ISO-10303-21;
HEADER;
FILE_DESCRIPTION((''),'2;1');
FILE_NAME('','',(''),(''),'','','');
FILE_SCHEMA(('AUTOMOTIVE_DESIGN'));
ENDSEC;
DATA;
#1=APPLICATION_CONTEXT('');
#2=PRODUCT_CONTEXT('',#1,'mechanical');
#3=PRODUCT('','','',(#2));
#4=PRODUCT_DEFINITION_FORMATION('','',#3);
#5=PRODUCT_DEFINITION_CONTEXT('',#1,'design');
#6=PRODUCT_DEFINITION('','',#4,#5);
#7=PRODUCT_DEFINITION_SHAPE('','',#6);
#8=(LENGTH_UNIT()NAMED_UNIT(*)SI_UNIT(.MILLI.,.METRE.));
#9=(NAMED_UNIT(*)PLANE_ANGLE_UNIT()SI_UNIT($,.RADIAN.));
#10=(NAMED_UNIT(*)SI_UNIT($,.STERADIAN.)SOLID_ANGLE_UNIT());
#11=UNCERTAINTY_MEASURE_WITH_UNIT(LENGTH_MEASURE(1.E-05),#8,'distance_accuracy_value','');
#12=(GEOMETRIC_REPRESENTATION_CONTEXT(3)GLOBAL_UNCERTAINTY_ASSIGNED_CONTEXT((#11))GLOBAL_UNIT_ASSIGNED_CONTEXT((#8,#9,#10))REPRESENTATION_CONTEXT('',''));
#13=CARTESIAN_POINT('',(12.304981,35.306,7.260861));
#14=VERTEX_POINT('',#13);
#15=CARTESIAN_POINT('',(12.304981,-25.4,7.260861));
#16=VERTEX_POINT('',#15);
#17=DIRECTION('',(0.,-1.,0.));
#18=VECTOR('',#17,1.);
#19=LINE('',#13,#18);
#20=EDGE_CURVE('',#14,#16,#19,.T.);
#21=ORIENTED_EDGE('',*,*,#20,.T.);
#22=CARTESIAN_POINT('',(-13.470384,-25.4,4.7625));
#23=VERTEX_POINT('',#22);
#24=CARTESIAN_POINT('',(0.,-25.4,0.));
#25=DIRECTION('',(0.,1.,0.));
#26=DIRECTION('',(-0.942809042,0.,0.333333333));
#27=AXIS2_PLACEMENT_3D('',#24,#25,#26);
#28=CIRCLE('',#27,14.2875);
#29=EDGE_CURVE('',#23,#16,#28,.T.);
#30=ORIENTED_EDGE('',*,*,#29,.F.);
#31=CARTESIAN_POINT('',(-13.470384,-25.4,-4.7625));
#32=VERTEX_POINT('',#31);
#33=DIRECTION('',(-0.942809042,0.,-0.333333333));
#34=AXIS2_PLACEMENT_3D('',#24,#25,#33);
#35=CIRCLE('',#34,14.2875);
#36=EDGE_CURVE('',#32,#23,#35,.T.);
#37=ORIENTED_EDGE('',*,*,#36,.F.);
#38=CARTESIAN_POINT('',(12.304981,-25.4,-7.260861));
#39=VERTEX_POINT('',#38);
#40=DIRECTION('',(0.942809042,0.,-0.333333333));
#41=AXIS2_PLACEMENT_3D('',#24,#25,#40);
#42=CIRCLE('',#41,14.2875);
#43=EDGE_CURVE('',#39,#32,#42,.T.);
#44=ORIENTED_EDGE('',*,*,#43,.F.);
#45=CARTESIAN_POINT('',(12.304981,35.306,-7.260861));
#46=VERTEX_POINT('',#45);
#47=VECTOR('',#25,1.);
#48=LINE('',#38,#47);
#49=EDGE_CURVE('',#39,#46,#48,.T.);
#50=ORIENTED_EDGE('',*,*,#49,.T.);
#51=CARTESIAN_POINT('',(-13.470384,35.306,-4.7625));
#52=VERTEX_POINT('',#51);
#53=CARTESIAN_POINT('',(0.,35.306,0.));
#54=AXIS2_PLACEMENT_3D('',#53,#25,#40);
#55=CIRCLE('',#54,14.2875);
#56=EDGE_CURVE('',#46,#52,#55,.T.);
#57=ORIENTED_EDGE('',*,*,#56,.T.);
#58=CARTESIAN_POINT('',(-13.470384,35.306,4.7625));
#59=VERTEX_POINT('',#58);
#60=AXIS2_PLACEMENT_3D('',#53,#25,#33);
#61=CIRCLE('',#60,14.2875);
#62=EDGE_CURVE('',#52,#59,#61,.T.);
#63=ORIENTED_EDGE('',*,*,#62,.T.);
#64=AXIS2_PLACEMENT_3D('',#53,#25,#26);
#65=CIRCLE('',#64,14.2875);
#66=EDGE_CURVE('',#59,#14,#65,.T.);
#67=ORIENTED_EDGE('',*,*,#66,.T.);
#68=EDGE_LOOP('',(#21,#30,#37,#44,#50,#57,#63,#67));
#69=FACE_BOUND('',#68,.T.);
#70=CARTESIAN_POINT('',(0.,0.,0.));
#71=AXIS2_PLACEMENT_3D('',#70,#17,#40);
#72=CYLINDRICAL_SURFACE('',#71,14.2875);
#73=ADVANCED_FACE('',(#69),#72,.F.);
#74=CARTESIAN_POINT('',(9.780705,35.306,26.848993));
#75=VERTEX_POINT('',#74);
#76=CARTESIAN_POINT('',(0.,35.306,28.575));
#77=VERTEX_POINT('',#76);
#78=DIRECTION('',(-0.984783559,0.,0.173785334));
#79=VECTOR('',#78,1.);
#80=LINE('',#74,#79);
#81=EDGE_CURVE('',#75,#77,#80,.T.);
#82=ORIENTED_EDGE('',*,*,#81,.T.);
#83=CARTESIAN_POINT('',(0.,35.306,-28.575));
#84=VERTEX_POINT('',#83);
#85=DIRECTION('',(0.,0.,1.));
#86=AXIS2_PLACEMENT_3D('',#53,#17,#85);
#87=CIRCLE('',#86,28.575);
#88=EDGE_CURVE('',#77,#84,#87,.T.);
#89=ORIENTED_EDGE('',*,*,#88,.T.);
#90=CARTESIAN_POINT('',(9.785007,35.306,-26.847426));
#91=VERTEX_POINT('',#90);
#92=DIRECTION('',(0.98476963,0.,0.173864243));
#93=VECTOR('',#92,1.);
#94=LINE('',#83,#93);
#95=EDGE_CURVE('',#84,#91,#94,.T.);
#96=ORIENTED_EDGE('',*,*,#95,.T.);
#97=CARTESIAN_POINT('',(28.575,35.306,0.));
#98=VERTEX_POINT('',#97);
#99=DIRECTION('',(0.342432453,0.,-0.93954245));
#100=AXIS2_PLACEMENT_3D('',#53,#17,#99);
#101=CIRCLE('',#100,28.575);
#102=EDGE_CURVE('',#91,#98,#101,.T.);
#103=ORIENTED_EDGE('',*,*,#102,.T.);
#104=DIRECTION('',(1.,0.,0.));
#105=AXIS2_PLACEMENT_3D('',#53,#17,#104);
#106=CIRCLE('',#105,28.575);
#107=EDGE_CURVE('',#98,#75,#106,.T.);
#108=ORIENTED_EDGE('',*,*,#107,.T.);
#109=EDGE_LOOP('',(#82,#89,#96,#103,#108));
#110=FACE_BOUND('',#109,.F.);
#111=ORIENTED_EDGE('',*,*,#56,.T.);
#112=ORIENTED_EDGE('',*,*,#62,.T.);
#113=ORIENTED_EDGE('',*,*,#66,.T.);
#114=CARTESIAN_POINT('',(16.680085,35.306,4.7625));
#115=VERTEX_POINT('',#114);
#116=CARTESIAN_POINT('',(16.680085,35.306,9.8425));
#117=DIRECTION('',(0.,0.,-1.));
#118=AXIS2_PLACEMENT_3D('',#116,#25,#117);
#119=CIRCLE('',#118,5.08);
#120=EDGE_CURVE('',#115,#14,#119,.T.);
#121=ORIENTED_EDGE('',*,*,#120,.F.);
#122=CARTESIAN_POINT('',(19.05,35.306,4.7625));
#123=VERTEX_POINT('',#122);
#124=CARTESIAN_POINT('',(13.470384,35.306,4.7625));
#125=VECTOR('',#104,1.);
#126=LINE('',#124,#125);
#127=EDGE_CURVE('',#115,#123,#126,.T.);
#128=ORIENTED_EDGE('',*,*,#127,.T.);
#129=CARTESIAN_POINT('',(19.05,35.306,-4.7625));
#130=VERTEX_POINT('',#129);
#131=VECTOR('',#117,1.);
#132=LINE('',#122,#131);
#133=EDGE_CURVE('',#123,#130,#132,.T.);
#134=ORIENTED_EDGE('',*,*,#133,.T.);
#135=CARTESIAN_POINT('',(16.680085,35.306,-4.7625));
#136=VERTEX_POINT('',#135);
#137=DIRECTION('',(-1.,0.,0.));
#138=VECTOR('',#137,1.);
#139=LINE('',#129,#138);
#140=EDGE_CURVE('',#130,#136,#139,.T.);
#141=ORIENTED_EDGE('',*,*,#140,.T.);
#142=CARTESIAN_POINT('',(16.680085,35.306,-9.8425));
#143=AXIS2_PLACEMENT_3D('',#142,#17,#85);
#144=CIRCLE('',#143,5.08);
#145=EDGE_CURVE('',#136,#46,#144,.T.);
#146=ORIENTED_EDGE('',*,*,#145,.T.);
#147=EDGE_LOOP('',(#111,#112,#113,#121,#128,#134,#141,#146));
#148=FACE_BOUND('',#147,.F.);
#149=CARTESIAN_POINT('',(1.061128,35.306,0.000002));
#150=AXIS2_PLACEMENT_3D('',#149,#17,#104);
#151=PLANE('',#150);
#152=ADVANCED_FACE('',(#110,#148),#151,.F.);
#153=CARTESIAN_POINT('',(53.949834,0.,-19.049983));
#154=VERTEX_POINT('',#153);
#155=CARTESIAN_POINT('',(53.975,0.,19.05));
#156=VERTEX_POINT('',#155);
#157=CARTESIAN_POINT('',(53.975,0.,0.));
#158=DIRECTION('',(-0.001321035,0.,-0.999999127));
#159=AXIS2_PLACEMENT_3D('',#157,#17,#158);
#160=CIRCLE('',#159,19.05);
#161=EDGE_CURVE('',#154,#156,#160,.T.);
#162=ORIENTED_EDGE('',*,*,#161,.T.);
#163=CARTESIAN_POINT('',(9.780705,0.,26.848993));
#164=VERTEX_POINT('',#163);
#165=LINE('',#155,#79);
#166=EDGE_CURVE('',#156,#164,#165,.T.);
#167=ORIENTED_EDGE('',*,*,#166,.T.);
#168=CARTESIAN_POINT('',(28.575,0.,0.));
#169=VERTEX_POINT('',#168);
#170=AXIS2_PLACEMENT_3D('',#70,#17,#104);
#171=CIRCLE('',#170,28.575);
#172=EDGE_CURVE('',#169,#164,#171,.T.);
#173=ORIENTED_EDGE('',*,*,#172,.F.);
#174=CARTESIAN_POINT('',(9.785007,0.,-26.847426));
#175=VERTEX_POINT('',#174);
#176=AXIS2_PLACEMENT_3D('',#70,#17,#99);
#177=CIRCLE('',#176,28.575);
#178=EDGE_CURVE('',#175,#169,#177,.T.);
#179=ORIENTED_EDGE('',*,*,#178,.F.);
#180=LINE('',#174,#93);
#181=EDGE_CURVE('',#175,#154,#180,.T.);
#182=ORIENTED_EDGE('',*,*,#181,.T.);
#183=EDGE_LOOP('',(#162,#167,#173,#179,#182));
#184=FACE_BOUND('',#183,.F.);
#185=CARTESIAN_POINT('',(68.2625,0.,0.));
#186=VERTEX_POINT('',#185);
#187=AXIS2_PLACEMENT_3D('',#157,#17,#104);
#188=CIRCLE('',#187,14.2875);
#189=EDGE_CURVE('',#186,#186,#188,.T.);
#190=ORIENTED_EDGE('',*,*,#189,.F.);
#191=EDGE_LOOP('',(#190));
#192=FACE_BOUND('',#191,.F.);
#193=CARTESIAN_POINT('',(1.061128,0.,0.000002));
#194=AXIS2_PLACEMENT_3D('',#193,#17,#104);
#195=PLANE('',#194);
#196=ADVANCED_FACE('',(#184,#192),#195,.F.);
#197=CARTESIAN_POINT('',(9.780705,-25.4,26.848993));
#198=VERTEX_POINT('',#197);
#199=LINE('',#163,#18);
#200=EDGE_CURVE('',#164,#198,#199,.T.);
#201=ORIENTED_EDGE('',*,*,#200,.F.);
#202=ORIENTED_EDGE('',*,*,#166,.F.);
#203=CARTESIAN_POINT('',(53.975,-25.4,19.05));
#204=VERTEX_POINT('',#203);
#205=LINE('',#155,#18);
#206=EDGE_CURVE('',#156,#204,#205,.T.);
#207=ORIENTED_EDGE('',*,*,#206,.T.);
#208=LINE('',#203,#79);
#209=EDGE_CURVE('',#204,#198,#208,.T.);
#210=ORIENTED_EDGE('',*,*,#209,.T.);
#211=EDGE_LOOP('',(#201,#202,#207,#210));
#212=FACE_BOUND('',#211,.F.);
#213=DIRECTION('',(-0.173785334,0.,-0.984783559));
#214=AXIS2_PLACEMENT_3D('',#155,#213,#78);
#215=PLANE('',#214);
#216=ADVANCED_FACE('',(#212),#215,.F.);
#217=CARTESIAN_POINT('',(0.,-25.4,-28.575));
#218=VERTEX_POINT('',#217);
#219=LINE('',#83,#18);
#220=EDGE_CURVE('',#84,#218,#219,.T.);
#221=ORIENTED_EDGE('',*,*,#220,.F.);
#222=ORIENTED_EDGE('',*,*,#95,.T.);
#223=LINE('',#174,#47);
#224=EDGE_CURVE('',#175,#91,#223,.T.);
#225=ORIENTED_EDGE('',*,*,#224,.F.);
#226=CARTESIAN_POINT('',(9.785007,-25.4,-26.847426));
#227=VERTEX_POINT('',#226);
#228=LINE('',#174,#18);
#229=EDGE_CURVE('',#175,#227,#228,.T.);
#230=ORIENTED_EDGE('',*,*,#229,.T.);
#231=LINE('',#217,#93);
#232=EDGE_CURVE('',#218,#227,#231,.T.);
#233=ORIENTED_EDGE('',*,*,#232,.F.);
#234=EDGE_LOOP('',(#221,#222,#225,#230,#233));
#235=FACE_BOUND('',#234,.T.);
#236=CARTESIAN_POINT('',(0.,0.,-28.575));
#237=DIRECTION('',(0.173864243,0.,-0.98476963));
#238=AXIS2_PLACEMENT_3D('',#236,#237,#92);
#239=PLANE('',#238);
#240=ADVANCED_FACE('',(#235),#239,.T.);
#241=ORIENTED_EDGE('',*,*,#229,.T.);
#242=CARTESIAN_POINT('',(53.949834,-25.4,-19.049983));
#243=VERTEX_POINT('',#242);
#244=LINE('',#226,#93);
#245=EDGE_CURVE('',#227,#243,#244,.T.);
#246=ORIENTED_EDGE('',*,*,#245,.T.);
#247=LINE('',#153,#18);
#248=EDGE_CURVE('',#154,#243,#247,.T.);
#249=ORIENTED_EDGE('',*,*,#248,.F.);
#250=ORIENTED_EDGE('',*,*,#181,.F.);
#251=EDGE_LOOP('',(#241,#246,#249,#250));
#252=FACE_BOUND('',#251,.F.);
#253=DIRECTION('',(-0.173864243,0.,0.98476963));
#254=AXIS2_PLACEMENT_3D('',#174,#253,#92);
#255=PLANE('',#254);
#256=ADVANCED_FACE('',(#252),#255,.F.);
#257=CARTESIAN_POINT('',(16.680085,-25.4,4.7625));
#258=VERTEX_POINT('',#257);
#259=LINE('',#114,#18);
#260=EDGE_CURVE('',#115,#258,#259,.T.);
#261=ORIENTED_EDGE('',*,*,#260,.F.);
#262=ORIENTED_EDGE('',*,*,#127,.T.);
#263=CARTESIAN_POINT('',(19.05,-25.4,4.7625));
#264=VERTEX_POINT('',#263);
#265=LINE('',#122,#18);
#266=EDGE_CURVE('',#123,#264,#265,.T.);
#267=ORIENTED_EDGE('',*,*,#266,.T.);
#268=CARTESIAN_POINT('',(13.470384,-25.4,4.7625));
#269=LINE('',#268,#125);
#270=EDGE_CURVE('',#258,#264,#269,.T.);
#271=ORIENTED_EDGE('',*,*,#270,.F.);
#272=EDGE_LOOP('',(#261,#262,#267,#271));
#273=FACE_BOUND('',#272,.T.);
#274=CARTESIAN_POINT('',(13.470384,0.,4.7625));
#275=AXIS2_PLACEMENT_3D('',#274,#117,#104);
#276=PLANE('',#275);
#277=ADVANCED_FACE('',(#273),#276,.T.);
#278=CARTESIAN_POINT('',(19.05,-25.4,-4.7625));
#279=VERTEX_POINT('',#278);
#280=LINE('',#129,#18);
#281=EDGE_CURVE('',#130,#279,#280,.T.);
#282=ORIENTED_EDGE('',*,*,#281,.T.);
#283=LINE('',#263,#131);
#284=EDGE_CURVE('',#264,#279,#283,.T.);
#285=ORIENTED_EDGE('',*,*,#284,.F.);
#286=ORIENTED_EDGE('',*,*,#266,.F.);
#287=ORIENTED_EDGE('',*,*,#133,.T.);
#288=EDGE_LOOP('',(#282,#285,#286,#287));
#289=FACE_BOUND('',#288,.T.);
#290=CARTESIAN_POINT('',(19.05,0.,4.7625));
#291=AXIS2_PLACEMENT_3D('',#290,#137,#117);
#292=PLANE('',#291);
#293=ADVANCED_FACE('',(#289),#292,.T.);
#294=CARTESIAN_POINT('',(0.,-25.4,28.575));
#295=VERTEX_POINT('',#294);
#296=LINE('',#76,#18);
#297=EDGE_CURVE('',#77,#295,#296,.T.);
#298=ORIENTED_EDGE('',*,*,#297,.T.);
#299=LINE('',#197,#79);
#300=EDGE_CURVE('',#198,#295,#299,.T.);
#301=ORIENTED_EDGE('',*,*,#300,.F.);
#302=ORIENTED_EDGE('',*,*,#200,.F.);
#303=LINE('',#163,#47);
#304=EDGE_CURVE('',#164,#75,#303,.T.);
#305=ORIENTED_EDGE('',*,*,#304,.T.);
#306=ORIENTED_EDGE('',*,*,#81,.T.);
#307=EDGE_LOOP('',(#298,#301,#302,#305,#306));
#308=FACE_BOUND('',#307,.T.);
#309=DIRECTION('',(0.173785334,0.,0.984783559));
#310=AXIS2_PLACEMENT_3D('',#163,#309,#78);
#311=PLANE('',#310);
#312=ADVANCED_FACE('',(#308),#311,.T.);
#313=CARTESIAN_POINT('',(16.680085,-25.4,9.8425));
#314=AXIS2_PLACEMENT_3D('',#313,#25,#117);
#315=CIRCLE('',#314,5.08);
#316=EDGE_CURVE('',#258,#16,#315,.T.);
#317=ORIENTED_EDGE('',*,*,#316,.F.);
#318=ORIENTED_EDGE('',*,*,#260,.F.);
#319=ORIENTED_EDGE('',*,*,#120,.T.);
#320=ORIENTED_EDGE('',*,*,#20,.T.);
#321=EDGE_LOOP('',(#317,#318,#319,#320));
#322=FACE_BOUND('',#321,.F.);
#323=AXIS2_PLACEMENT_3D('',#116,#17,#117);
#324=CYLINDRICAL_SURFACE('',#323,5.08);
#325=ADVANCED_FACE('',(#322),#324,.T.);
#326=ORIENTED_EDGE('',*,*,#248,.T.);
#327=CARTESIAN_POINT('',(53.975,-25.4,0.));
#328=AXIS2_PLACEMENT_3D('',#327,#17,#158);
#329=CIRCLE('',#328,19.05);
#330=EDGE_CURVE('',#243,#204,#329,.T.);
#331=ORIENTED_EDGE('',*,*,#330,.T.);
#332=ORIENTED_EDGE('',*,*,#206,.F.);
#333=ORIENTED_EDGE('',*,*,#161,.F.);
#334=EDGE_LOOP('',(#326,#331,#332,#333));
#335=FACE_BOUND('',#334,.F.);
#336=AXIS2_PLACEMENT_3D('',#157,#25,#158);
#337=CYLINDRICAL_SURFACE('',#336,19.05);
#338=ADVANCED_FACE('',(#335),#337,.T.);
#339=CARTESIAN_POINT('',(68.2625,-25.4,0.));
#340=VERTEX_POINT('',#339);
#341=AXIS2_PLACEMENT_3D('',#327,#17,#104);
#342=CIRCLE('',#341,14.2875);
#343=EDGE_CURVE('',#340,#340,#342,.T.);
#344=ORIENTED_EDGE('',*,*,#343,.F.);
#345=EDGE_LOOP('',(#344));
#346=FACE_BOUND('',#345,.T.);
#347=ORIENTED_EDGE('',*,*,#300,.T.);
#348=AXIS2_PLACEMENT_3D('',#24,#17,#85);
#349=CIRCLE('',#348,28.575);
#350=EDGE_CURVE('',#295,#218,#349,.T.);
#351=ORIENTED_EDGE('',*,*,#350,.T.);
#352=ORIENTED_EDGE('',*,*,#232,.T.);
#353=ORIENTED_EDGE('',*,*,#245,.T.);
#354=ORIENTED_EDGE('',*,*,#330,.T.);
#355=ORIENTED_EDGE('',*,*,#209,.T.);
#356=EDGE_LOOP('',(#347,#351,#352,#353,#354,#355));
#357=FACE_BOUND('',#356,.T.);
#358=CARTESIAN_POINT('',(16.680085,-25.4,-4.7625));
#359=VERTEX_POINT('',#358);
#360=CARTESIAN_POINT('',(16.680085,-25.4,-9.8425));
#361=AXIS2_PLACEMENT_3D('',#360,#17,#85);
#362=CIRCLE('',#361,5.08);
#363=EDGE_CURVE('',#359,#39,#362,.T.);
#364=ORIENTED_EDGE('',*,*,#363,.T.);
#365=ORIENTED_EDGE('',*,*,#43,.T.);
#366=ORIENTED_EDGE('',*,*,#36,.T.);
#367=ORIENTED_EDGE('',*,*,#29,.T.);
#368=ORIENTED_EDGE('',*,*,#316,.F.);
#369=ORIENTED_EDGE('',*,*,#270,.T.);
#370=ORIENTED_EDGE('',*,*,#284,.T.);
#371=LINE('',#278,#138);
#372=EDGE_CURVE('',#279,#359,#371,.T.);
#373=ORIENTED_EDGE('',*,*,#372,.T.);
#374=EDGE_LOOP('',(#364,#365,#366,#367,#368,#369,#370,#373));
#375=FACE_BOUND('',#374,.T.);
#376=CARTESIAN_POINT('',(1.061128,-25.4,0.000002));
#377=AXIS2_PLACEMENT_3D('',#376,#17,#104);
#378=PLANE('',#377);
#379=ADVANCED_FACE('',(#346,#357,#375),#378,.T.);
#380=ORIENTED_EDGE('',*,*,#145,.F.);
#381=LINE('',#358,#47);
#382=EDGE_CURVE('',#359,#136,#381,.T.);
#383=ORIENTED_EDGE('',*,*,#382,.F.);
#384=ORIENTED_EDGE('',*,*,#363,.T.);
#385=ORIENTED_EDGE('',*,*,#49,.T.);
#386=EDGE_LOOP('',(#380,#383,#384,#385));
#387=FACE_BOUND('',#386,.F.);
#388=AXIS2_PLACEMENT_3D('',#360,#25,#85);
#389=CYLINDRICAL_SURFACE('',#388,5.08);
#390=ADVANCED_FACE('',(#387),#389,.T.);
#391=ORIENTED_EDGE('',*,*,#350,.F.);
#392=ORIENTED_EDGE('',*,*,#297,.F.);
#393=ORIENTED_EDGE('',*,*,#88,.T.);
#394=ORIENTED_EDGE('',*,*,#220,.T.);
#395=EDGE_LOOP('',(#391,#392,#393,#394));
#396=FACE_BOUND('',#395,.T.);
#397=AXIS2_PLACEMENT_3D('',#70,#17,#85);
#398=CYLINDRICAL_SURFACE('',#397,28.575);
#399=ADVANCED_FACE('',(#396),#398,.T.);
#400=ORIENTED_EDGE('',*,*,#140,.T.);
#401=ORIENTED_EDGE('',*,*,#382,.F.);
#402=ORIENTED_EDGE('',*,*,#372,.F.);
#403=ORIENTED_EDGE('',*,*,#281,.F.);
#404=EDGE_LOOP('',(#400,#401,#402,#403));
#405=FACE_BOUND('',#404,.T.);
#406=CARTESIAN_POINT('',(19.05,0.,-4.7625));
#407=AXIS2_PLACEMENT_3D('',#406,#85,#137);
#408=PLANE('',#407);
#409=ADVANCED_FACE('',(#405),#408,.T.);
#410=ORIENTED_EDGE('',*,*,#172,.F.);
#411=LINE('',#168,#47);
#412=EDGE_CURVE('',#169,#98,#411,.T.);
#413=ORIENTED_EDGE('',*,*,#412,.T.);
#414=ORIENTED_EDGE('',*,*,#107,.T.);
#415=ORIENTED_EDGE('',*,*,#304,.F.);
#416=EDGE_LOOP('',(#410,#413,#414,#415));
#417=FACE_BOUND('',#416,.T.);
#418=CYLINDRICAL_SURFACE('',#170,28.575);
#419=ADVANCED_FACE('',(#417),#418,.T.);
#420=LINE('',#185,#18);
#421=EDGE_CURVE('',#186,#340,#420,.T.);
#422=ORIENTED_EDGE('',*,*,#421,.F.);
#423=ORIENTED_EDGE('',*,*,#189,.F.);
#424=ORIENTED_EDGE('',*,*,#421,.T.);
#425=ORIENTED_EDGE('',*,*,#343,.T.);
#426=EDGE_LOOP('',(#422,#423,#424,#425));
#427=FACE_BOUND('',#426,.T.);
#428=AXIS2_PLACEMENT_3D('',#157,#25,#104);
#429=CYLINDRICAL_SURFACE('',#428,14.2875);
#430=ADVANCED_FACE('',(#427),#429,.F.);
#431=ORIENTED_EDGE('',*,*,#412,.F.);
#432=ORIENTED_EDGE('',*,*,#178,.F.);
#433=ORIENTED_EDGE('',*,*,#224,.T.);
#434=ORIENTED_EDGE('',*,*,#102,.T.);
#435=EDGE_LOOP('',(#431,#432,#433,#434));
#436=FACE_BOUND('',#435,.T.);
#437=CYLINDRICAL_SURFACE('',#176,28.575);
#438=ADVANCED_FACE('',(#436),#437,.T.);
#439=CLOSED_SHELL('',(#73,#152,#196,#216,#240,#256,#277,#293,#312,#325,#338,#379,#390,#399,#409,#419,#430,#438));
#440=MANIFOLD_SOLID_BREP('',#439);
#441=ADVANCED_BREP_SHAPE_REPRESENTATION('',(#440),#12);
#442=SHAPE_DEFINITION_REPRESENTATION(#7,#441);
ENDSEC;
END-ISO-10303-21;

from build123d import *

# Parameters (mm, degrees)
F0_R     = 14.2875
F1_DEPTH = 25.4
F2_DEPTH = 35.306
F3_R     = 5.08


with BuildPart() as f1:
    # F0 (on Front) → F1 (new body)
    with BuildSketch(Plane.XZ):
        with BuildLine():
            Line((9.780704698, 26.8489932886), (0, 28.575))
            ThreePointArc((0, 28.575), (-28.575, 0), (0, -28.575))
            Line((0, -28.575), (9.7850073358, -26.8474255086))
            ThreePointArc((9.7850073358, -26.8474255086), (23.4108651017, -16.3848106547), (28.575, 0))
            ThreePointArc((28.575, 0), (23.4095521288, 16.3866864902), (9.780704698, 26.8489932886))
        make_face()
        with BuildLine():
            ThreePointArc((-13.4703841816, 4.7625), (0, 14.2875), (13.4703841816, 4.7625))
            Line((13.4703841816, 4.7625), (19.05, 4.7625))
            Line((19.05, 4.7625), (19.05, -4.7625))
            Line((19.05, -4.7625), (13.4703841816, -4.7625))
            ThreePointArc((13.4703841816, -4.7625), (0, -14.2875), (-13.4703841816, -4.7625))
            Line((-13.4703841816, -4.7625), (-19.05, -4.7625))
            Line((-19.05, -4.7625), (-19.05, 4.7625))
            Line((-19.05, 4.7625), (-13.4703841816, 4.7625))
        make_face(mode=Mode.SUBTRACT)
        with BuildLine():
            Line((53.975, 19.05), (9.780704698, 26.8489932886))
            ThreePointArc((9.780704698, 26.8489932886), (23.4095521288, 16.3866864902), (28.575, 0))
            ThreePointArc((28.575, 0), (23.4108651017, -16.3848106547), (9.7850073358, -26.8474255086))
            Line((9.7850073358, -26.8474255086), (53.949834283, -19.0499833776))
            ThreePointArc((53.949834283, -19.0499833776), (34.9250041556, 0.0125828612), (53.975, 19.05))
        make_face()
        with BuildLine():
            ThreePointArc((73.025, 0), (67.4453841816, 13.4703841816), (53.975, 19.05))
            ThreePointArc((53.975, 19.05), (34.9250041556, 0.0125828612), (53.949834283, -19.0499833776))
            ThreePointArc((53.949834283, -19.0499833776), (67.4364838166, -13.4792786697), (73.025, 0))
        make_face()
        with Locations((53.975, 0)):
            Circle(F0_R, mode=Mode.SUBTRACT)
        with BuildLine():
            ThreePointArc((-13.4703841816, -4.7625), (-14.2875, 0), (-13.4703841816, 4.7625))
            Line((-13.4703841816, 4.7625), (-19.05, 4.7625))
            Line((-19.05, 4.7625), (-19.05, -4.7625))
            Line((-19.05, -4.7625), (-13.4703841816, -4.7625))
        make_face()
    extrude(amount=F1_DEPTH)

    # F0 (on Front) → F2 (join)
    with BuildSketch(Plane.XZ):
        with BuildLine():
            Line((9.780704698, 26.8489932886), (0, 28.575))
            ThreePointArc((0, 28.575), (-28.575, 0), (0, -28.575))
            Line((0, -28.575), (9.7850073358, -26.8474255086))
            ThreePointArc((9.7850073358, -26.8474255086), (23.4108651017, -16.3848106547), (28.575, 0))
            ThreePointArc((28.575, 0), (23.4095521288, 16.3866864902), (9.780704698, 26.8489932886))
        make_face()
        with BuildLine():
            ThreePointArc((-13.4703841816, 4.7625), (0, 14.2875), (13.4703841816, 4.7625))
            Line((13.4703841816, 4.7625), (19.05, 4.7625))
            Line((19.05, 4.7625), (19.05, -4.7625))
            Line((19.05, -4.7625), (13.4703841816, -4.7625))
            ThreePointArc((13.4703841816, -4.7625), (0, -14.2875), (-13.4703841816, -4.7625))
            Line((-13.4703841816, -4.7625), (-19.05, -4.7625))
            Line((-19.05, -4.7625), (-19.05, 4.7625))
            Line((-19.05, 4.7625), (-13.4703841816, 4.7625))
        make_face(mode=Mode.SUBTRACT)
        with BuildLine():
            ThreePointArc((-13.4703841816, -4.7625), (-14.2875, 0), (-13.4703841816, 4.7625))
            Line((-13.4703841816, 4.7625), (-19.05, 4.7625))
            Line((-19.05, 4.7625), (-19.05, -4.7625))
            Line((-19.05, -4.7625), (-13.4703841816, -4.7625))
        make_face()
    extrude(amount=-F2_DEPTH)

    # F3
    f3_edges = [f1.edges().sort_by_distance(p)[0] for p in [
        (13.470384, 4.953, -4.7625),
        (13.470384, 4.953, 4.7625),
    ]]
    fillet(f3_edges, radius=F3_R)


solid = f1.part
